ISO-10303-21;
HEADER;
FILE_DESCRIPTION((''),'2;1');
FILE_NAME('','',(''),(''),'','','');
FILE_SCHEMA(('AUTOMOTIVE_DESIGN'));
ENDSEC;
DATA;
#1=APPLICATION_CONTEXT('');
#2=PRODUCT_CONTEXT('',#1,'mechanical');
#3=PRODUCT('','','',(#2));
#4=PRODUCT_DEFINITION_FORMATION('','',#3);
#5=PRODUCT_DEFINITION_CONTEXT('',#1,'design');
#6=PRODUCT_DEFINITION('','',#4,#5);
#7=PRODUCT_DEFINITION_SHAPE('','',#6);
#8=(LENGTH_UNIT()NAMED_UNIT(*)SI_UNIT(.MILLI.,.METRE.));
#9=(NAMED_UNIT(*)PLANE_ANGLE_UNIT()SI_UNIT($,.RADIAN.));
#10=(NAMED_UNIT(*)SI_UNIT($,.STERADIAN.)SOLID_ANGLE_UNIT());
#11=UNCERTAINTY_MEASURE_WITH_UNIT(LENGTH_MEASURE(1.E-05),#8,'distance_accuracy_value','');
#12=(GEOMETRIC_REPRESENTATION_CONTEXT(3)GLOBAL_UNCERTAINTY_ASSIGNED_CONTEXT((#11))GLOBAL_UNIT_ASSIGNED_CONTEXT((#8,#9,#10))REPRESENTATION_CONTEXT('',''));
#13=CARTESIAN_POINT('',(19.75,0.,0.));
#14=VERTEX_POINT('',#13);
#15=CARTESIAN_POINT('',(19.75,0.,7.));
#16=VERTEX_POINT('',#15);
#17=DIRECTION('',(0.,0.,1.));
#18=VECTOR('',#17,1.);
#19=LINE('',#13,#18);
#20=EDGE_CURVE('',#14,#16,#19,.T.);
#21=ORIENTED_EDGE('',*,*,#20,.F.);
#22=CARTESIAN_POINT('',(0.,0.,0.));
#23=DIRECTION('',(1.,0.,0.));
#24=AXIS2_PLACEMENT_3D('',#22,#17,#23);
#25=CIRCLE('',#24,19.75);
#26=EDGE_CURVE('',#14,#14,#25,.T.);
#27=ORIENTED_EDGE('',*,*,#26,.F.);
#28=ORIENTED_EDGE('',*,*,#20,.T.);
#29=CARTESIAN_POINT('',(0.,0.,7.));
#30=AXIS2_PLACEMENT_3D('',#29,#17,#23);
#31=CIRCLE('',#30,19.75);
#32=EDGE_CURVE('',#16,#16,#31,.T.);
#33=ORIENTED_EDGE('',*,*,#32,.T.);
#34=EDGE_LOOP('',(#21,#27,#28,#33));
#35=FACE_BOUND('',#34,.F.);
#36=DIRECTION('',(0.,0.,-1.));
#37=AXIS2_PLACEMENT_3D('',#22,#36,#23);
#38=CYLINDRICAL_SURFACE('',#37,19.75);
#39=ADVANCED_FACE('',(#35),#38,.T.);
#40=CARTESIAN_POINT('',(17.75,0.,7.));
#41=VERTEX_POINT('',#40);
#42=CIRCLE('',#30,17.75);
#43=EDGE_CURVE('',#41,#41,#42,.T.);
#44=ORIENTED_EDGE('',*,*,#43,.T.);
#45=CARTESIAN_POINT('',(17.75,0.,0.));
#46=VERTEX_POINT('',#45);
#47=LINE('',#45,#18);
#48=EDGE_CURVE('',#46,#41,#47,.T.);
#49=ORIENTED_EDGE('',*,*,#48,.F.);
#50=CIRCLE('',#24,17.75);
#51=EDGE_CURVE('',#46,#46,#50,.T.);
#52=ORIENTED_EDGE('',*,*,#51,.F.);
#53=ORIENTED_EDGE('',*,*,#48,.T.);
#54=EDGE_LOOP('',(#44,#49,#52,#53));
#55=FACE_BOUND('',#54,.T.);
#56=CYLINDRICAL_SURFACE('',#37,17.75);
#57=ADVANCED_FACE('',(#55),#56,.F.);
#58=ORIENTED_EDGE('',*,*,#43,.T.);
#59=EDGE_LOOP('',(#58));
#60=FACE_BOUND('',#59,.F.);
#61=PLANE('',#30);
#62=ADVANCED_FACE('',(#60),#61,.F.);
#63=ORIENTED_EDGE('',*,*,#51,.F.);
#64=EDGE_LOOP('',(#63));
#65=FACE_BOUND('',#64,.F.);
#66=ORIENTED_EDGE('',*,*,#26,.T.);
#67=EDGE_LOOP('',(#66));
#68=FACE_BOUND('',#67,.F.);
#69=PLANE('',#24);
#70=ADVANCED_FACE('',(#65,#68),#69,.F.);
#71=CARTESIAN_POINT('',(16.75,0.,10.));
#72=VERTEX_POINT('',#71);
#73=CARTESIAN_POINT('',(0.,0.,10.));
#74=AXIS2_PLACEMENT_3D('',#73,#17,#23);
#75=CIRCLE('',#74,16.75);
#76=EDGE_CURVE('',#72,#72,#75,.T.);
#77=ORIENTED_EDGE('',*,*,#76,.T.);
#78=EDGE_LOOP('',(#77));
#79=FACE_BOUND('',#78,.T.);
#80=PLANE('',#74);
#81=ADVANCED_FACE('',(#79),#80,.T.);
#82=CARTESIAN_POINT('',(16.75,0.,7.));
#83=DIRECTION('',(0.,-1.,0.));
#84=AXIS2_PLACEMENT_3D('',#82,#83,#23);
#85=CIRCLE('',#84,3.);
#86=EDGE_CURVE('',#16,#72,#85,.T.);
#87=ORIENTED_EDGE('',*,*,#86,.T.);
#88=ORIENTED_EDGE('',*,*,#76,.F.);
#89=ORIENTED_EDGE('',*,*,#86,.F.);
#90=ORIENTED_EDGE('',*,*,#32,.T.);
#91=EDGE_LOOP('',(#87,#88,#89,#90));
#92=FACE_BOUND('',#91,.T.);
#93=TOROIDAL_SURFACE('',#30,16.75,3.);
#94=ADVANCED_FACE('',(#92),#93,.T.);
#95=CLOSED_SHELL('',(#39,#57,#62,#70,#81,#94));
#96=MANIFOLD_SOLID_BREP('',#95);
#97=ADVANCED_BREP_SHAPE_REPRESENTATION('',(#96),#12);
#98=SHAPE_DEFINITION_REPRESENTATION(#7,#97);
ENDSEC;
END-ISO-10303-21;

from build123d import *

# Parameters (mm, degrees)
F2_R     = 19.75
F2_R_2   = 17.75
F3_DEPTH = 10
F4_DEPTH = 7
F5_R     = 3


with BuildPart() as f3:
    # F2 (on Top) → F3 (new body)
    with BuildSketch(Plane.XY):
        Circle(F2_R)
        Circle(F2_R_2, mode=Mode.SUBTRACT)
        Circle(F2_R_2)
    extrude(amount=F3_DEPTH)

    # F2 (on Top) → F4 (cut)
    with BuildSketch(Plane.XY):
        Circle(F2_R_2)
    extrude(amount=F4_DEPTH, mode=Mode.SUBTRACT)

    # F5
    f5_edges = [f3.edges().sort_by_distance(p)[0] for p in [
        (-19.75, 0, 10),
    ]]
    fillet(f5_edges, radius=F5_R)


solid = f3.part
